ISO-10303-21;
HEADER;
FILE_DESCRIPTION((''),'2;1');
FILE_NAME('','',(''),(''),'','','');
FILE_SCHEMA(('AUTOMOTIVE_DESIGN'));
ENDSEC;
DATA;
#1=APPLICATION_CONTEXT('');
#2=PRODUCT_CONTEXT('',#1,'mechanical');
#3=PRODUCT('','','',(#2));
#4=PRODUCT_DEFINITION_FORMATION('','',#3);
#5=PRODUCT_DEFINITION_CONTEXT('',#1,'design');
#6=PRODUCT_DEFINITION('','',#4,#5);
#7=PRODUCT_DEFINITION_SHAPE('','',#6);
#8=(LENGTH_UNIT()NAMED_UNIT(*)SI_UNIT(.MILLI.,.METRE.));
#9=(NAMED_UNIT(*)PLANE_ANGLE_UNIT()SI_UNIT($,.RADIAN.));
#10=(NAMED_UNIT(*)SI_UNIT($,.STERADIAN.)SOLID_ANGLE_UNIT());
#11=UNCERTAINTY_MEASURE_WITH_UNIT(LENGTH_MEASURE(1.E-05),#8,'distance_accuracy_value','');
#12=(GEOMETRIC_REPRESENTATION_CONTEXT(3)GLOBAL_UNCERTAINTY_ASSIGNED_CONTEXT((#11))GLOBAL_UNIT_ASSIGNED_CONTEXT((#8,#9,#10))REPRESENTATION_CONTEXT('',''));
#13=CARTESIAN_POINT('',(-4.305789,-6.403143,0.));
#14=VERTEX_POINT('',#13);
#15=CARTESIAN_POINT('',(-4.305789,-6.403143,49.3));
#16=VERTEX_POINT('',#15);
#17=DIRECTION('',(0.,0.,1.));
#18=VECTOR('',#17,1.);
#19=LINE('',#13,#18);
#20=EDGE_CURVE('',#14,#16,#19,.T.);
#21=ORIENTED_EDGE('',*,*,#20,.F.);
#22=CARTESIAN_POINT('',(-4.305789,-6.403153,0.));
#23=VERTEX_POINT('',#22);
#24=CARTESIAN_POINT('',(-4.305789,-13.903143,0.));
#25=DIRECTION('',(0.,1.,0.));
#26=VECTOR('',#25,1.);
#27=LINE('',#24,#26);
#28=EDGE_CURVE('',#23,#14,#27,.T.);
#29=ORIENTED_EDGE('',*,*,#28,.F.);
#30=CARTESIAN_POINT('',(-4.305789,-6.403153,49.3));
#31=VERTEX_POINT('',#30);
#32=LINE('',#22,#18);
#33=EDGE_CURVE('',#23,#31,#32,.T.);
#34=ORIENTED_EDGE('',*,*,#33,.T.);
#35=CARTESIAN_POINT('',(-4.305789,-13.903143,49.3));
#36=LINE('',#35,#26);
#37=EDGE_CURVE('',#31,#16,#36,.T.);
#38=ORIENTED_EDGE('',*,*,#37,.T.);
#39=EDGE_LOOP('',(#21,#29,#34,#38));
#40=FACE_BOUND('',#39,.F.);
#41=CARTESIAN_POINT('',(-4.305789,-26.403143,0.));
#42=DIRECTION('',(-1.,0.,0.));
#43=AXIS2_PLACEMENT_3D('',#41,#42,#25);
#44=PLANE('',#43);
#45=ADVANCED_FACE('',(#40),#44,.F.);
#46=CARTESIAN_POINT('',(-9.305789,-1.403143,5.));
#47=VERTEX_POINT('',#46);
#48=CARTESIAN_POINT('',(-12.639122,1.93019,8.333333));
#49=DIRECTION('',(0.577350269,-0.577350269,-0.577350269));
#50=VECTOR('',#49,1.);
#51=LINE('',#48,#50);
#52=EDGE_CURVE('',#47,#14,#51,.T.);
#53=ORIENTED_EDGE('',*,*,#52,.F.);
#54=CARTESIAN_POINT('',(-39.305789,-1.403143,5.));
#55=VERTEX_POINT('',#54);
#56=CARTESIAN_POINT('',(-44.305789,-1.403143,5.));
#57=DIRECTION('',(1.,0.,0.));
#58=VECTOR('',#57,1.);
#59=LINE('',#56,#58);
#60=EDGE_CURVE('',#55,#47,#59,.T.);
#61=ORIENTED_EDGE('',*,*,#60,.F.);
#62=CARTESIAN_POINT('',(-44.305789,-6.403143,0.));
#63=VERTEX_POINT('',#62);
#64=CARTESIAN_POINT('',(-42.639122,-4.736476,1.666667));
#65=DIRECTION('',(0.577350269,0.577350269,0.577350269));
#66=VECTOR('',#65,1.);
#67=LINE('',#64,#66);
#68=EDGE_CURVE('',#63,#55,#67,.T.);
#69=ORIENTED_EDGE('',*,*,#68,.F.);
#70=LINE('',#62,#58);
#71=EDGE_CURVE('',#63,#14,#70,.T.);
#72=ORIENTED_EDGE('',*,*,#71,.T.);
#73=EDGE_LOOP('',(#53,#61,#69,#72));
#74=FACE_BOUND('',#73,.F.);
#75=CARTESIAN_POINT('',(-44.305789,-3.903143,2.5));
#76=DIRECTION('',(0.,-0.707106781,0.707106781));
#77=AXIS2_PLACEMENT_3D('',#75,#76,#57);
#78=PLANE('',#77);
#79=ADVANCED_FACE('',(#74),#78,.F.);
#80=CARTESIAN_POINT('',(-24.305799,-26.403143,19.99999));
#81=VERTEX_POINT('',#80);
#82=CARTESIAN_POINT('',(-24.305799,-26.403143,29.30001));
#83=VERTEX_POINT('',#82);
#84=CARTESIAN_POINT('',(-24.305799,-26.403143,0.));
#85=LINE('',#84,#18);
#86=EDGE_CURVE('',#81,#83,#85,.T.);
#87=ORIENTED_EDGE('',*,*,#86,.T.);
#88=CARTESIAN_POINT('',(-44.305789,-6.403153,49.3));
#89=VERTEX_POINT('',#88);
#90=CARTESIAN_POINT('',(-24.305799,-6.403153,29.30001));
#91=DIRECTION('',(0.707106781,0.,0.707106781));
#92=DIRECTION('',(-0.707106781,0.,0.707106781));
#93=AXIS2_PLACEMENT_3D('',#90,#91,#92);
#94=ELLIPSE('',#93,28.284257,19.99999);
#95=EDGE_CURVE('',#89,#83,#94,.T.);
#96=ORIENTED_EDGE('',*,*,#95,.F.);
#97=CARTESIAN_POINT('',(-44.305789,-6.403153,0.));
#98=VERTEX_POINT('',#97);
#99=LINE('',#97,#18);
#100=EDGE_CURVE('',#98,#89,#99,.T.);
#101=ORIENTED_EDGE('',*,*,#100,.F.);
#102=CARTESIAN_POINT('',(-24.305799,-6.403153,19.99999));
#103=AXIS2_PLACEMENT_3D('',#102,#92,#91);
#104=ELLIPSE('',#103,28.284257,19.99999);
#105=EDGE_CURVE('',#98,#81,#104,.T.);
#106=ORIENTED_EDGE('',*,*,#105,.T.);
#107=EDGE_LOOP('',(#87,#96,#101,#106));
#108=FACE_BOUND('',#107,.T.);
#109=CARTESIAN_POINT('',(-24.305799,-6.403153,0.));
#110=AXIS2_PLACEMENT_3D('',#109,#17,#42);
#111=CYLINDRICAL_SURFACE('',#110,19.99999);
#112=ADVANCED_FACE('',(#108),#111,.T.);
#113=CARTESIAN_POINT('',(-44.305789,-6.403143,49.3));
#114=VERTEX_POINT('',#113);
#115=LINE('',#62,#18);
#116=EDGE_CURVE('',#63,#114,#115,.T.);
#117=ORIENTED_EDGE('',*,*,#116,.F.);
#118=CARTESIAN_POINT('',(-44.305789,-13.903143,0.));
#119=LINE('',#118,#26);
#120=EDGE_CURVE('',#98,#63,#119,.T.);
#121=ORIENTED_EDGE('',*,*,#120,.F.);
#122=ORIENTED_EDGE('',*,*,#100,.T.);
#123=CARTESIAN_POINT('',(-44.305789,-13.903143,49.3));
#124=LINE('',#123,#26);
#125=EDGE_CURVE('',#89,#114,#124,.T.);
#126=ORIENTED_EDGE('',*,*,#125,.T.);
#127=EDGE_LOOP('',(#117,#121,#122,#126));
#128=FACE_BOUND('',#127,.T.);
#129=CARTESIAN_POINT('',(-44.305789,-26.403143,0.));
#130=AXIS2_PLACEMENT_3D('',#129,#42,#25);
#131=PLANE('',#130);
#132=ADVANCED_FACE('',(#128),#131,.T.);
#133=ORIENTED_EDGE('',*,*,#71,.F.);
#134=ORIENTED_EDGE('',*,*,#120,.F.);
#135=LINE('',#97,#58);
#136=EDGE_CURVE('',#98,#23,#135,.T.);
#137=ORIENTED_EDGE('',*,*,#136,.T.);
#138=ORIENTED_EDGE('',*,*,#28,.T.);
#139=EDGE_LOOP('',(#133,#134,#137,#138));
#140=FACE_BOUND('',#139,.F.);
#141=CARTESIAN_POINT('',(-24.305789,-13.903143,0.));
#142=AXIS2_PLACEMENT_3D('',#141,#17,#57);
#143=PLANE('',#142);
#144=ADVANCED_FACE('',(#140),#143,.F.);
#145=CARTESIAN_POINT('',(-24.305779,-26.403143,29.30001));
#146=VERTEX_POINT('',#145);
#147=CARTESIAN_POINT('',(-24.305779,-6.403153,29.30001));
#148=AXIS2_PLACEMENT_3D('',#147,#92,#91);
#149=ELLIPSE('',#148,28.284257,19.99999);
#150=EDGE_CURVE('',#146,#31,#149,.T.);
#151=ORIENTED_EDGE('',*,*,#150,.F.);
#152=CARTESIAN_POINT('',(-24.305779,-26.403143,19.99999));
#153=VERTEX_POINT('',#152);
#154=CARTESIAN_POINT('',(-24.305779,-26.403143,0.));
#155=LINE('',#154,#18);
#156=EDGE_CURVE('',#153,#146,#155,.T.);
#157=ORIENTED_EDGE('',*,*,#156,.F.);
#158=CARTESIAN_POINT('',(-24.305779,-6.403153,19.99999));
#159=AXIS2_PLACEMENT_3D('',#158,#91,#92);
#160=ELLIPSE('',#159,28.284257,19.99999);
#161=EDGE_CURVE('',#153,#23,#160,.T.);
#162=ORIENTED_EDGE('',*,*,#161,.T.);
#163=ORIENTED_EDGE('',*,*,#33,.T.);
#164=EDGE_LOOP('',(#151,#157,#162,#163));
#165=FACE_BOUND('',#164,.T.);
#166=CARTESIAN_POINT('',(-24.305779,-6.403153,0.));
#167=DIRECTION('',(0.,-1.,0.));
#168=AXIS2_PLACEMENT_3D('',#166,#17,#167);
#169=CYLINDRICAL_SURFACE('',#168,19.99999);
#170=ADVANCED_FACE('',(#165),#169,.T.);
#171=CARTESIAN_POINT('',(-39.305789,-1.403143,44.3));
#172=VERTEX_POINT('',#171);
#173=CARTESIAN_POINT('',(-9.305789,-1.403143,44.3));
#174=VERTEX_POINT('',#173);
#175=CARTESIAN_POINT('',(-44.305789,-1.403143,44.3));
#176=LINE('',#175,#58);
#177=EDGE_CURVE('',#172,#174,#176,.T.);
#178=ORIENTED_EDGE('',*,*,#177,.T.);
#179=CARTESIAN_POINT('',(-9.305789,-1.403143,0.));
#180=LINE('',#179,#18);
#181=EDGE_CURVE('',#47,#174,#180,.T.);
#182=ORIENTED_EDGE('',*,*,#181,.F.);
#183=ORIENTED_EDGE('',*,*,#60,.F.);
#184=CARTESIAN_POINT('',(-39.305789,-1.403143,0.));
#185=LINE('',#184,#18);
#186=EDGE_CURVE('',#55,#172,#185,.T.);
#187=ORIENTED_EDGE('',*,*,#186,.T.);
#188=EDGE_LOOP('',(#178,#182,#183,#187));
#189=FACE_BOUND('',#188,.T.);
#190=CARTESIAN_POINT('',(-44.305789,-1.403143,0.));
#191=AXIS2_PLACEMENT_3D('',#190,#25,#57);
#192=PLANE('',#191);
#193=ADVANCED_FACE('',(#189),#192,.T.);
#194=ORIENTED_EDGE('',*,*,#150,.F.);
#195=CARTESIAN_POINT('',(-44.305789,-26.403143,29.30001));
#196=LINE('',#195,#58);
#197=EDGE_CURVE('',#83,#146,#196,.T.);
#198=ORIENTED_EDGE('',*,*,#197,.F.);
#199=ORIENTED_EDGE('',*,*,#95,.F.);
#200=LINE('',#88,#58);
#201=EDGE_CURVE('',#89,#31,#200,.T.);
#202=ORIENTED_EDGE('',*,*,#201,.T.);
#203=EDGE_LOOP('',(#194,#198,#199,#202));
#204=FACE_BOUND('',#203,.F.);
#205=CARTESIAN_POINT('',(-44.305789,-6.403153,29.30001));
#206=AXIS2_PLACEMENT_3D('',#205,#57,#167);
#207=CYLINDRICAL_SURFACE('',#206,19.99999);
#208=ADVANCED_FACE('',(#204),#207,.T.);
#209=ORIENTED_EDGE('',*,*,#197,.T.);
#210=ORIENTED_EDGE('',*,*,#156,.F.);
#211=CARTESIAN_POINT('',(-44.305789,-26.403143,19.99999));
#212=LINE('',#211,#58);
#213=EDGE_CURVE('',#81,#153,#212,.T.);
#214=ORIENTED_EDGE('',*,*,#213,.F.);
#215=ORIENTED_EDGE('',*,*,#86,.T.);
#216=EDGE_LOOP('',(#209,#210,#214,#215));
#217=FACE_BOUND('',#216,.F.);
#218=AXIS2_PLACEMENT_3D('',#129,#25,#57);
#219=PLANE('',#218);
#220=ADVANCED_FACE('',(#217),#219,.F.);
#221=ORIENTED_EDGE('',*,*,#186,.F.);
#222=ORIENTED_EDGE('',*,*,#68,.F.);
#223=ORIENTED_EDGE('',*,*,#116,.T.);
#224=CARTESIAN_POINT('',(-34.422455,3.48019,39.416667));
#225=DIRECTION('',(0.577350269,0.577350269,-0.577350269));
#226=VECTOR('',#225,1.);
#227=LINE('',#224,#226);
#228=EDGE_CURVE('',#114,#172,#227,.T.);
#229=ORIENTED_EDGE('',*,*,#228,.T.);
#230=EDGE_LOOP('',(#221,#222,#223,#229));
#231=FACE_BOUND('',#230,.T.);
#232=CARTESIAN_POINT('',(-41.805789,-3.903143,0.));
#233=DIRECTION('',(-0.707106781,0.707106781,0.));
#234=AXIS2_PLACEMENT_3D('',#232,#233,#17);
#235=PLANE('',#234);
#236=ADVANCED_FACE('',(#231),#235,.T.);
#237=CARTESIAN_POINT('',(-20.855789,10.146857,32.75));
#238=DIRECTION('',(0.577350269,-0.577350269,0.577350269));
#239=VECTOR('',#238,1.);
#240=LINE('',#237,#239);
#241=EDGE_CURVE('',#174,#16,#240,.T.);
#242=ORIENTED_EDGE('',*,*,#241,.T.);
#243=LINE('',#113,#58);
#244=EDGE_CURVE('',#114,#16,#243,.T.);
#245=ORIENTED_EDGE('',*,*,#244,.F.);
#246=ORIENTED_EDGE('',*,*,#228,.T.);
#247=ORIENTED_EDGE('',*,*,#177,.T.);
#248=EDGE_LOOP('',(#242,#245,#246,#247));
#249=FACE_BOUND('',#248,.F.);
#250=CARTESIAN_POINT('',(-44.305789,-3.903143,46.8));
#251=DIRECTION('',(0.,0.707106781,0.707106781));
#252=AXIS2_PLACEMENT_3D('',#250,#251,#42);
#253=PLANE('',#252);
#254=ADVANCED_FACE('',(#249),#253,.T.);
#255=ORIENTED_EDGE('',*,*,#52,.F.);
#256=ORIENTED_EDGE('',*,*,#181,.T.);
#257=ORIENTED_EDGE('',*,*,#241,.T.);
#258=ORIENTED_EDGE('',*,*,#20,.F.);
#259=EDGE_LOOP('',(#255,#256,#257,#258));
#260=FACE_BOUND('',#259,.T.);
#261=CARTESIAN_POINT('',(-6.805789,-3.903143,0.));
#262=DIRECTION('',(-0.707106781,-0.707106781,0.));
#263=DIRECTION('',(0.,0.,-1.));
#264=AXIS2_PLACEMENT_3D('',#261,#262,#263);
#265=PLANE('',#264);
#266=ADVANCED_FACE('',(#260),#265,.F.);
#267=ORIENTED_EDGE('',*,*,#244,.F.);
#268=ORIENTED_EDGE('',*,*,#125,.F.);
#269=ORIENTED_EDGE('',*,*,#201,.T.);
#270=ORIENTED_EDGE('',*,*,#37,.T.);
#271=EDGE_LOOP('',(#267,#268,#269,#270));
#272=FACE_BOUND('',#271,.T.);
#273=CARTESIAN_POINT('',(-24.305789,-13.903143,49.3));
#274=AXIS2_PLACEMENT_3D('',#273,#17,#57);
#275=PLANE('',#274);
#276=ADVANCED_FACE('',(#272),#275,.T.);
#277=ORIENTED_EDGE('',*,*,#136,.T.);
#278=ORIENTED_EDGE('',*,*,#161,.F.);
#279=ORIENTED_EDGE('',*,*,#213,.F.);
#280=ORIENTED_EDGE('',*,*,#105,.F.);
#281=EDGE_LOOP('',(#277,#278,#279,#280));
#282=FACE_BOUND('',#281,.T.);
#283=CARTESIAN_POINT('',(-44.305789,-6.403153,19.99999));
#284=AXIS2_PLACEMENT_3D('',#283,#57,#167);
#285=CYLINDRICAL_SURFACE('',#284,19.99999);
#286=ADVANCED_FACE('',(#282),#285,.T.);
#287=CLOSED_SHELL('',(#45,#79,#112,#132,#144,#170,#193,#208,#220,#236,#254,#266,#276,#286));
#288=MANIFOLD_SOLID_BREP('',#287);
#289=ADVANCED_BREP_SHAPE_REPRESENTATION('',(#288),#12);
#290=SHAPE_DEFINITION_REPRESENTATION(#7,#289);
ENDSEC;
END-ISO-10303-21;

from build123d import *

# Parameters (mm, degrees)
F0_W     = 40
F0_H     = 25
F1_DEPTH = 49.3
F2_R     = 19.99999
F3_SIZE  = 5


# Not quite as in the source:
# - a fillet or chamfer is up to 0.001 mm smaller than in the source, because OpenCascade refuses the exact size


with BuildPart() as f1:
    # F0 (on Top) → F1 (new body)
    with BuildSketch(Plane.XY):
        with Locations((-24.3057886145, -13.9031428844)):
            Rectangle(F0_W, F0_H)
    extrude(amount=F1_DEPTH)

    # F2 (radius 20 in the source; OpenCascade refuses exactly that, so slightly less here)
    f2_edges = [f1.edges().sort_by_distance(p)[0] for p in [
        (-44.305789, -26.403143, 24.65),
        (-4.305789, -26.403143, 24.65),
        (-24.305789, -26.403143, 0),
        (-24.305789, -26.403143, 49.3),
    ]]
    fillet(f2_edges, radius=F2_R)

    # F3
    f3_edges = [f1.edges().sort_by_distance(p)[0] for p in [
        (-4.305789, -1.403143, 24.65),
        (-44.305789, -1.403143, 24.65),
        (-24.305789, -1.403143, 0),
        (-24.305789, -1.403143, 49.3),
    ]]
    chamfer(f3_edges, length=F3_SIZE)


solid = f1.part
